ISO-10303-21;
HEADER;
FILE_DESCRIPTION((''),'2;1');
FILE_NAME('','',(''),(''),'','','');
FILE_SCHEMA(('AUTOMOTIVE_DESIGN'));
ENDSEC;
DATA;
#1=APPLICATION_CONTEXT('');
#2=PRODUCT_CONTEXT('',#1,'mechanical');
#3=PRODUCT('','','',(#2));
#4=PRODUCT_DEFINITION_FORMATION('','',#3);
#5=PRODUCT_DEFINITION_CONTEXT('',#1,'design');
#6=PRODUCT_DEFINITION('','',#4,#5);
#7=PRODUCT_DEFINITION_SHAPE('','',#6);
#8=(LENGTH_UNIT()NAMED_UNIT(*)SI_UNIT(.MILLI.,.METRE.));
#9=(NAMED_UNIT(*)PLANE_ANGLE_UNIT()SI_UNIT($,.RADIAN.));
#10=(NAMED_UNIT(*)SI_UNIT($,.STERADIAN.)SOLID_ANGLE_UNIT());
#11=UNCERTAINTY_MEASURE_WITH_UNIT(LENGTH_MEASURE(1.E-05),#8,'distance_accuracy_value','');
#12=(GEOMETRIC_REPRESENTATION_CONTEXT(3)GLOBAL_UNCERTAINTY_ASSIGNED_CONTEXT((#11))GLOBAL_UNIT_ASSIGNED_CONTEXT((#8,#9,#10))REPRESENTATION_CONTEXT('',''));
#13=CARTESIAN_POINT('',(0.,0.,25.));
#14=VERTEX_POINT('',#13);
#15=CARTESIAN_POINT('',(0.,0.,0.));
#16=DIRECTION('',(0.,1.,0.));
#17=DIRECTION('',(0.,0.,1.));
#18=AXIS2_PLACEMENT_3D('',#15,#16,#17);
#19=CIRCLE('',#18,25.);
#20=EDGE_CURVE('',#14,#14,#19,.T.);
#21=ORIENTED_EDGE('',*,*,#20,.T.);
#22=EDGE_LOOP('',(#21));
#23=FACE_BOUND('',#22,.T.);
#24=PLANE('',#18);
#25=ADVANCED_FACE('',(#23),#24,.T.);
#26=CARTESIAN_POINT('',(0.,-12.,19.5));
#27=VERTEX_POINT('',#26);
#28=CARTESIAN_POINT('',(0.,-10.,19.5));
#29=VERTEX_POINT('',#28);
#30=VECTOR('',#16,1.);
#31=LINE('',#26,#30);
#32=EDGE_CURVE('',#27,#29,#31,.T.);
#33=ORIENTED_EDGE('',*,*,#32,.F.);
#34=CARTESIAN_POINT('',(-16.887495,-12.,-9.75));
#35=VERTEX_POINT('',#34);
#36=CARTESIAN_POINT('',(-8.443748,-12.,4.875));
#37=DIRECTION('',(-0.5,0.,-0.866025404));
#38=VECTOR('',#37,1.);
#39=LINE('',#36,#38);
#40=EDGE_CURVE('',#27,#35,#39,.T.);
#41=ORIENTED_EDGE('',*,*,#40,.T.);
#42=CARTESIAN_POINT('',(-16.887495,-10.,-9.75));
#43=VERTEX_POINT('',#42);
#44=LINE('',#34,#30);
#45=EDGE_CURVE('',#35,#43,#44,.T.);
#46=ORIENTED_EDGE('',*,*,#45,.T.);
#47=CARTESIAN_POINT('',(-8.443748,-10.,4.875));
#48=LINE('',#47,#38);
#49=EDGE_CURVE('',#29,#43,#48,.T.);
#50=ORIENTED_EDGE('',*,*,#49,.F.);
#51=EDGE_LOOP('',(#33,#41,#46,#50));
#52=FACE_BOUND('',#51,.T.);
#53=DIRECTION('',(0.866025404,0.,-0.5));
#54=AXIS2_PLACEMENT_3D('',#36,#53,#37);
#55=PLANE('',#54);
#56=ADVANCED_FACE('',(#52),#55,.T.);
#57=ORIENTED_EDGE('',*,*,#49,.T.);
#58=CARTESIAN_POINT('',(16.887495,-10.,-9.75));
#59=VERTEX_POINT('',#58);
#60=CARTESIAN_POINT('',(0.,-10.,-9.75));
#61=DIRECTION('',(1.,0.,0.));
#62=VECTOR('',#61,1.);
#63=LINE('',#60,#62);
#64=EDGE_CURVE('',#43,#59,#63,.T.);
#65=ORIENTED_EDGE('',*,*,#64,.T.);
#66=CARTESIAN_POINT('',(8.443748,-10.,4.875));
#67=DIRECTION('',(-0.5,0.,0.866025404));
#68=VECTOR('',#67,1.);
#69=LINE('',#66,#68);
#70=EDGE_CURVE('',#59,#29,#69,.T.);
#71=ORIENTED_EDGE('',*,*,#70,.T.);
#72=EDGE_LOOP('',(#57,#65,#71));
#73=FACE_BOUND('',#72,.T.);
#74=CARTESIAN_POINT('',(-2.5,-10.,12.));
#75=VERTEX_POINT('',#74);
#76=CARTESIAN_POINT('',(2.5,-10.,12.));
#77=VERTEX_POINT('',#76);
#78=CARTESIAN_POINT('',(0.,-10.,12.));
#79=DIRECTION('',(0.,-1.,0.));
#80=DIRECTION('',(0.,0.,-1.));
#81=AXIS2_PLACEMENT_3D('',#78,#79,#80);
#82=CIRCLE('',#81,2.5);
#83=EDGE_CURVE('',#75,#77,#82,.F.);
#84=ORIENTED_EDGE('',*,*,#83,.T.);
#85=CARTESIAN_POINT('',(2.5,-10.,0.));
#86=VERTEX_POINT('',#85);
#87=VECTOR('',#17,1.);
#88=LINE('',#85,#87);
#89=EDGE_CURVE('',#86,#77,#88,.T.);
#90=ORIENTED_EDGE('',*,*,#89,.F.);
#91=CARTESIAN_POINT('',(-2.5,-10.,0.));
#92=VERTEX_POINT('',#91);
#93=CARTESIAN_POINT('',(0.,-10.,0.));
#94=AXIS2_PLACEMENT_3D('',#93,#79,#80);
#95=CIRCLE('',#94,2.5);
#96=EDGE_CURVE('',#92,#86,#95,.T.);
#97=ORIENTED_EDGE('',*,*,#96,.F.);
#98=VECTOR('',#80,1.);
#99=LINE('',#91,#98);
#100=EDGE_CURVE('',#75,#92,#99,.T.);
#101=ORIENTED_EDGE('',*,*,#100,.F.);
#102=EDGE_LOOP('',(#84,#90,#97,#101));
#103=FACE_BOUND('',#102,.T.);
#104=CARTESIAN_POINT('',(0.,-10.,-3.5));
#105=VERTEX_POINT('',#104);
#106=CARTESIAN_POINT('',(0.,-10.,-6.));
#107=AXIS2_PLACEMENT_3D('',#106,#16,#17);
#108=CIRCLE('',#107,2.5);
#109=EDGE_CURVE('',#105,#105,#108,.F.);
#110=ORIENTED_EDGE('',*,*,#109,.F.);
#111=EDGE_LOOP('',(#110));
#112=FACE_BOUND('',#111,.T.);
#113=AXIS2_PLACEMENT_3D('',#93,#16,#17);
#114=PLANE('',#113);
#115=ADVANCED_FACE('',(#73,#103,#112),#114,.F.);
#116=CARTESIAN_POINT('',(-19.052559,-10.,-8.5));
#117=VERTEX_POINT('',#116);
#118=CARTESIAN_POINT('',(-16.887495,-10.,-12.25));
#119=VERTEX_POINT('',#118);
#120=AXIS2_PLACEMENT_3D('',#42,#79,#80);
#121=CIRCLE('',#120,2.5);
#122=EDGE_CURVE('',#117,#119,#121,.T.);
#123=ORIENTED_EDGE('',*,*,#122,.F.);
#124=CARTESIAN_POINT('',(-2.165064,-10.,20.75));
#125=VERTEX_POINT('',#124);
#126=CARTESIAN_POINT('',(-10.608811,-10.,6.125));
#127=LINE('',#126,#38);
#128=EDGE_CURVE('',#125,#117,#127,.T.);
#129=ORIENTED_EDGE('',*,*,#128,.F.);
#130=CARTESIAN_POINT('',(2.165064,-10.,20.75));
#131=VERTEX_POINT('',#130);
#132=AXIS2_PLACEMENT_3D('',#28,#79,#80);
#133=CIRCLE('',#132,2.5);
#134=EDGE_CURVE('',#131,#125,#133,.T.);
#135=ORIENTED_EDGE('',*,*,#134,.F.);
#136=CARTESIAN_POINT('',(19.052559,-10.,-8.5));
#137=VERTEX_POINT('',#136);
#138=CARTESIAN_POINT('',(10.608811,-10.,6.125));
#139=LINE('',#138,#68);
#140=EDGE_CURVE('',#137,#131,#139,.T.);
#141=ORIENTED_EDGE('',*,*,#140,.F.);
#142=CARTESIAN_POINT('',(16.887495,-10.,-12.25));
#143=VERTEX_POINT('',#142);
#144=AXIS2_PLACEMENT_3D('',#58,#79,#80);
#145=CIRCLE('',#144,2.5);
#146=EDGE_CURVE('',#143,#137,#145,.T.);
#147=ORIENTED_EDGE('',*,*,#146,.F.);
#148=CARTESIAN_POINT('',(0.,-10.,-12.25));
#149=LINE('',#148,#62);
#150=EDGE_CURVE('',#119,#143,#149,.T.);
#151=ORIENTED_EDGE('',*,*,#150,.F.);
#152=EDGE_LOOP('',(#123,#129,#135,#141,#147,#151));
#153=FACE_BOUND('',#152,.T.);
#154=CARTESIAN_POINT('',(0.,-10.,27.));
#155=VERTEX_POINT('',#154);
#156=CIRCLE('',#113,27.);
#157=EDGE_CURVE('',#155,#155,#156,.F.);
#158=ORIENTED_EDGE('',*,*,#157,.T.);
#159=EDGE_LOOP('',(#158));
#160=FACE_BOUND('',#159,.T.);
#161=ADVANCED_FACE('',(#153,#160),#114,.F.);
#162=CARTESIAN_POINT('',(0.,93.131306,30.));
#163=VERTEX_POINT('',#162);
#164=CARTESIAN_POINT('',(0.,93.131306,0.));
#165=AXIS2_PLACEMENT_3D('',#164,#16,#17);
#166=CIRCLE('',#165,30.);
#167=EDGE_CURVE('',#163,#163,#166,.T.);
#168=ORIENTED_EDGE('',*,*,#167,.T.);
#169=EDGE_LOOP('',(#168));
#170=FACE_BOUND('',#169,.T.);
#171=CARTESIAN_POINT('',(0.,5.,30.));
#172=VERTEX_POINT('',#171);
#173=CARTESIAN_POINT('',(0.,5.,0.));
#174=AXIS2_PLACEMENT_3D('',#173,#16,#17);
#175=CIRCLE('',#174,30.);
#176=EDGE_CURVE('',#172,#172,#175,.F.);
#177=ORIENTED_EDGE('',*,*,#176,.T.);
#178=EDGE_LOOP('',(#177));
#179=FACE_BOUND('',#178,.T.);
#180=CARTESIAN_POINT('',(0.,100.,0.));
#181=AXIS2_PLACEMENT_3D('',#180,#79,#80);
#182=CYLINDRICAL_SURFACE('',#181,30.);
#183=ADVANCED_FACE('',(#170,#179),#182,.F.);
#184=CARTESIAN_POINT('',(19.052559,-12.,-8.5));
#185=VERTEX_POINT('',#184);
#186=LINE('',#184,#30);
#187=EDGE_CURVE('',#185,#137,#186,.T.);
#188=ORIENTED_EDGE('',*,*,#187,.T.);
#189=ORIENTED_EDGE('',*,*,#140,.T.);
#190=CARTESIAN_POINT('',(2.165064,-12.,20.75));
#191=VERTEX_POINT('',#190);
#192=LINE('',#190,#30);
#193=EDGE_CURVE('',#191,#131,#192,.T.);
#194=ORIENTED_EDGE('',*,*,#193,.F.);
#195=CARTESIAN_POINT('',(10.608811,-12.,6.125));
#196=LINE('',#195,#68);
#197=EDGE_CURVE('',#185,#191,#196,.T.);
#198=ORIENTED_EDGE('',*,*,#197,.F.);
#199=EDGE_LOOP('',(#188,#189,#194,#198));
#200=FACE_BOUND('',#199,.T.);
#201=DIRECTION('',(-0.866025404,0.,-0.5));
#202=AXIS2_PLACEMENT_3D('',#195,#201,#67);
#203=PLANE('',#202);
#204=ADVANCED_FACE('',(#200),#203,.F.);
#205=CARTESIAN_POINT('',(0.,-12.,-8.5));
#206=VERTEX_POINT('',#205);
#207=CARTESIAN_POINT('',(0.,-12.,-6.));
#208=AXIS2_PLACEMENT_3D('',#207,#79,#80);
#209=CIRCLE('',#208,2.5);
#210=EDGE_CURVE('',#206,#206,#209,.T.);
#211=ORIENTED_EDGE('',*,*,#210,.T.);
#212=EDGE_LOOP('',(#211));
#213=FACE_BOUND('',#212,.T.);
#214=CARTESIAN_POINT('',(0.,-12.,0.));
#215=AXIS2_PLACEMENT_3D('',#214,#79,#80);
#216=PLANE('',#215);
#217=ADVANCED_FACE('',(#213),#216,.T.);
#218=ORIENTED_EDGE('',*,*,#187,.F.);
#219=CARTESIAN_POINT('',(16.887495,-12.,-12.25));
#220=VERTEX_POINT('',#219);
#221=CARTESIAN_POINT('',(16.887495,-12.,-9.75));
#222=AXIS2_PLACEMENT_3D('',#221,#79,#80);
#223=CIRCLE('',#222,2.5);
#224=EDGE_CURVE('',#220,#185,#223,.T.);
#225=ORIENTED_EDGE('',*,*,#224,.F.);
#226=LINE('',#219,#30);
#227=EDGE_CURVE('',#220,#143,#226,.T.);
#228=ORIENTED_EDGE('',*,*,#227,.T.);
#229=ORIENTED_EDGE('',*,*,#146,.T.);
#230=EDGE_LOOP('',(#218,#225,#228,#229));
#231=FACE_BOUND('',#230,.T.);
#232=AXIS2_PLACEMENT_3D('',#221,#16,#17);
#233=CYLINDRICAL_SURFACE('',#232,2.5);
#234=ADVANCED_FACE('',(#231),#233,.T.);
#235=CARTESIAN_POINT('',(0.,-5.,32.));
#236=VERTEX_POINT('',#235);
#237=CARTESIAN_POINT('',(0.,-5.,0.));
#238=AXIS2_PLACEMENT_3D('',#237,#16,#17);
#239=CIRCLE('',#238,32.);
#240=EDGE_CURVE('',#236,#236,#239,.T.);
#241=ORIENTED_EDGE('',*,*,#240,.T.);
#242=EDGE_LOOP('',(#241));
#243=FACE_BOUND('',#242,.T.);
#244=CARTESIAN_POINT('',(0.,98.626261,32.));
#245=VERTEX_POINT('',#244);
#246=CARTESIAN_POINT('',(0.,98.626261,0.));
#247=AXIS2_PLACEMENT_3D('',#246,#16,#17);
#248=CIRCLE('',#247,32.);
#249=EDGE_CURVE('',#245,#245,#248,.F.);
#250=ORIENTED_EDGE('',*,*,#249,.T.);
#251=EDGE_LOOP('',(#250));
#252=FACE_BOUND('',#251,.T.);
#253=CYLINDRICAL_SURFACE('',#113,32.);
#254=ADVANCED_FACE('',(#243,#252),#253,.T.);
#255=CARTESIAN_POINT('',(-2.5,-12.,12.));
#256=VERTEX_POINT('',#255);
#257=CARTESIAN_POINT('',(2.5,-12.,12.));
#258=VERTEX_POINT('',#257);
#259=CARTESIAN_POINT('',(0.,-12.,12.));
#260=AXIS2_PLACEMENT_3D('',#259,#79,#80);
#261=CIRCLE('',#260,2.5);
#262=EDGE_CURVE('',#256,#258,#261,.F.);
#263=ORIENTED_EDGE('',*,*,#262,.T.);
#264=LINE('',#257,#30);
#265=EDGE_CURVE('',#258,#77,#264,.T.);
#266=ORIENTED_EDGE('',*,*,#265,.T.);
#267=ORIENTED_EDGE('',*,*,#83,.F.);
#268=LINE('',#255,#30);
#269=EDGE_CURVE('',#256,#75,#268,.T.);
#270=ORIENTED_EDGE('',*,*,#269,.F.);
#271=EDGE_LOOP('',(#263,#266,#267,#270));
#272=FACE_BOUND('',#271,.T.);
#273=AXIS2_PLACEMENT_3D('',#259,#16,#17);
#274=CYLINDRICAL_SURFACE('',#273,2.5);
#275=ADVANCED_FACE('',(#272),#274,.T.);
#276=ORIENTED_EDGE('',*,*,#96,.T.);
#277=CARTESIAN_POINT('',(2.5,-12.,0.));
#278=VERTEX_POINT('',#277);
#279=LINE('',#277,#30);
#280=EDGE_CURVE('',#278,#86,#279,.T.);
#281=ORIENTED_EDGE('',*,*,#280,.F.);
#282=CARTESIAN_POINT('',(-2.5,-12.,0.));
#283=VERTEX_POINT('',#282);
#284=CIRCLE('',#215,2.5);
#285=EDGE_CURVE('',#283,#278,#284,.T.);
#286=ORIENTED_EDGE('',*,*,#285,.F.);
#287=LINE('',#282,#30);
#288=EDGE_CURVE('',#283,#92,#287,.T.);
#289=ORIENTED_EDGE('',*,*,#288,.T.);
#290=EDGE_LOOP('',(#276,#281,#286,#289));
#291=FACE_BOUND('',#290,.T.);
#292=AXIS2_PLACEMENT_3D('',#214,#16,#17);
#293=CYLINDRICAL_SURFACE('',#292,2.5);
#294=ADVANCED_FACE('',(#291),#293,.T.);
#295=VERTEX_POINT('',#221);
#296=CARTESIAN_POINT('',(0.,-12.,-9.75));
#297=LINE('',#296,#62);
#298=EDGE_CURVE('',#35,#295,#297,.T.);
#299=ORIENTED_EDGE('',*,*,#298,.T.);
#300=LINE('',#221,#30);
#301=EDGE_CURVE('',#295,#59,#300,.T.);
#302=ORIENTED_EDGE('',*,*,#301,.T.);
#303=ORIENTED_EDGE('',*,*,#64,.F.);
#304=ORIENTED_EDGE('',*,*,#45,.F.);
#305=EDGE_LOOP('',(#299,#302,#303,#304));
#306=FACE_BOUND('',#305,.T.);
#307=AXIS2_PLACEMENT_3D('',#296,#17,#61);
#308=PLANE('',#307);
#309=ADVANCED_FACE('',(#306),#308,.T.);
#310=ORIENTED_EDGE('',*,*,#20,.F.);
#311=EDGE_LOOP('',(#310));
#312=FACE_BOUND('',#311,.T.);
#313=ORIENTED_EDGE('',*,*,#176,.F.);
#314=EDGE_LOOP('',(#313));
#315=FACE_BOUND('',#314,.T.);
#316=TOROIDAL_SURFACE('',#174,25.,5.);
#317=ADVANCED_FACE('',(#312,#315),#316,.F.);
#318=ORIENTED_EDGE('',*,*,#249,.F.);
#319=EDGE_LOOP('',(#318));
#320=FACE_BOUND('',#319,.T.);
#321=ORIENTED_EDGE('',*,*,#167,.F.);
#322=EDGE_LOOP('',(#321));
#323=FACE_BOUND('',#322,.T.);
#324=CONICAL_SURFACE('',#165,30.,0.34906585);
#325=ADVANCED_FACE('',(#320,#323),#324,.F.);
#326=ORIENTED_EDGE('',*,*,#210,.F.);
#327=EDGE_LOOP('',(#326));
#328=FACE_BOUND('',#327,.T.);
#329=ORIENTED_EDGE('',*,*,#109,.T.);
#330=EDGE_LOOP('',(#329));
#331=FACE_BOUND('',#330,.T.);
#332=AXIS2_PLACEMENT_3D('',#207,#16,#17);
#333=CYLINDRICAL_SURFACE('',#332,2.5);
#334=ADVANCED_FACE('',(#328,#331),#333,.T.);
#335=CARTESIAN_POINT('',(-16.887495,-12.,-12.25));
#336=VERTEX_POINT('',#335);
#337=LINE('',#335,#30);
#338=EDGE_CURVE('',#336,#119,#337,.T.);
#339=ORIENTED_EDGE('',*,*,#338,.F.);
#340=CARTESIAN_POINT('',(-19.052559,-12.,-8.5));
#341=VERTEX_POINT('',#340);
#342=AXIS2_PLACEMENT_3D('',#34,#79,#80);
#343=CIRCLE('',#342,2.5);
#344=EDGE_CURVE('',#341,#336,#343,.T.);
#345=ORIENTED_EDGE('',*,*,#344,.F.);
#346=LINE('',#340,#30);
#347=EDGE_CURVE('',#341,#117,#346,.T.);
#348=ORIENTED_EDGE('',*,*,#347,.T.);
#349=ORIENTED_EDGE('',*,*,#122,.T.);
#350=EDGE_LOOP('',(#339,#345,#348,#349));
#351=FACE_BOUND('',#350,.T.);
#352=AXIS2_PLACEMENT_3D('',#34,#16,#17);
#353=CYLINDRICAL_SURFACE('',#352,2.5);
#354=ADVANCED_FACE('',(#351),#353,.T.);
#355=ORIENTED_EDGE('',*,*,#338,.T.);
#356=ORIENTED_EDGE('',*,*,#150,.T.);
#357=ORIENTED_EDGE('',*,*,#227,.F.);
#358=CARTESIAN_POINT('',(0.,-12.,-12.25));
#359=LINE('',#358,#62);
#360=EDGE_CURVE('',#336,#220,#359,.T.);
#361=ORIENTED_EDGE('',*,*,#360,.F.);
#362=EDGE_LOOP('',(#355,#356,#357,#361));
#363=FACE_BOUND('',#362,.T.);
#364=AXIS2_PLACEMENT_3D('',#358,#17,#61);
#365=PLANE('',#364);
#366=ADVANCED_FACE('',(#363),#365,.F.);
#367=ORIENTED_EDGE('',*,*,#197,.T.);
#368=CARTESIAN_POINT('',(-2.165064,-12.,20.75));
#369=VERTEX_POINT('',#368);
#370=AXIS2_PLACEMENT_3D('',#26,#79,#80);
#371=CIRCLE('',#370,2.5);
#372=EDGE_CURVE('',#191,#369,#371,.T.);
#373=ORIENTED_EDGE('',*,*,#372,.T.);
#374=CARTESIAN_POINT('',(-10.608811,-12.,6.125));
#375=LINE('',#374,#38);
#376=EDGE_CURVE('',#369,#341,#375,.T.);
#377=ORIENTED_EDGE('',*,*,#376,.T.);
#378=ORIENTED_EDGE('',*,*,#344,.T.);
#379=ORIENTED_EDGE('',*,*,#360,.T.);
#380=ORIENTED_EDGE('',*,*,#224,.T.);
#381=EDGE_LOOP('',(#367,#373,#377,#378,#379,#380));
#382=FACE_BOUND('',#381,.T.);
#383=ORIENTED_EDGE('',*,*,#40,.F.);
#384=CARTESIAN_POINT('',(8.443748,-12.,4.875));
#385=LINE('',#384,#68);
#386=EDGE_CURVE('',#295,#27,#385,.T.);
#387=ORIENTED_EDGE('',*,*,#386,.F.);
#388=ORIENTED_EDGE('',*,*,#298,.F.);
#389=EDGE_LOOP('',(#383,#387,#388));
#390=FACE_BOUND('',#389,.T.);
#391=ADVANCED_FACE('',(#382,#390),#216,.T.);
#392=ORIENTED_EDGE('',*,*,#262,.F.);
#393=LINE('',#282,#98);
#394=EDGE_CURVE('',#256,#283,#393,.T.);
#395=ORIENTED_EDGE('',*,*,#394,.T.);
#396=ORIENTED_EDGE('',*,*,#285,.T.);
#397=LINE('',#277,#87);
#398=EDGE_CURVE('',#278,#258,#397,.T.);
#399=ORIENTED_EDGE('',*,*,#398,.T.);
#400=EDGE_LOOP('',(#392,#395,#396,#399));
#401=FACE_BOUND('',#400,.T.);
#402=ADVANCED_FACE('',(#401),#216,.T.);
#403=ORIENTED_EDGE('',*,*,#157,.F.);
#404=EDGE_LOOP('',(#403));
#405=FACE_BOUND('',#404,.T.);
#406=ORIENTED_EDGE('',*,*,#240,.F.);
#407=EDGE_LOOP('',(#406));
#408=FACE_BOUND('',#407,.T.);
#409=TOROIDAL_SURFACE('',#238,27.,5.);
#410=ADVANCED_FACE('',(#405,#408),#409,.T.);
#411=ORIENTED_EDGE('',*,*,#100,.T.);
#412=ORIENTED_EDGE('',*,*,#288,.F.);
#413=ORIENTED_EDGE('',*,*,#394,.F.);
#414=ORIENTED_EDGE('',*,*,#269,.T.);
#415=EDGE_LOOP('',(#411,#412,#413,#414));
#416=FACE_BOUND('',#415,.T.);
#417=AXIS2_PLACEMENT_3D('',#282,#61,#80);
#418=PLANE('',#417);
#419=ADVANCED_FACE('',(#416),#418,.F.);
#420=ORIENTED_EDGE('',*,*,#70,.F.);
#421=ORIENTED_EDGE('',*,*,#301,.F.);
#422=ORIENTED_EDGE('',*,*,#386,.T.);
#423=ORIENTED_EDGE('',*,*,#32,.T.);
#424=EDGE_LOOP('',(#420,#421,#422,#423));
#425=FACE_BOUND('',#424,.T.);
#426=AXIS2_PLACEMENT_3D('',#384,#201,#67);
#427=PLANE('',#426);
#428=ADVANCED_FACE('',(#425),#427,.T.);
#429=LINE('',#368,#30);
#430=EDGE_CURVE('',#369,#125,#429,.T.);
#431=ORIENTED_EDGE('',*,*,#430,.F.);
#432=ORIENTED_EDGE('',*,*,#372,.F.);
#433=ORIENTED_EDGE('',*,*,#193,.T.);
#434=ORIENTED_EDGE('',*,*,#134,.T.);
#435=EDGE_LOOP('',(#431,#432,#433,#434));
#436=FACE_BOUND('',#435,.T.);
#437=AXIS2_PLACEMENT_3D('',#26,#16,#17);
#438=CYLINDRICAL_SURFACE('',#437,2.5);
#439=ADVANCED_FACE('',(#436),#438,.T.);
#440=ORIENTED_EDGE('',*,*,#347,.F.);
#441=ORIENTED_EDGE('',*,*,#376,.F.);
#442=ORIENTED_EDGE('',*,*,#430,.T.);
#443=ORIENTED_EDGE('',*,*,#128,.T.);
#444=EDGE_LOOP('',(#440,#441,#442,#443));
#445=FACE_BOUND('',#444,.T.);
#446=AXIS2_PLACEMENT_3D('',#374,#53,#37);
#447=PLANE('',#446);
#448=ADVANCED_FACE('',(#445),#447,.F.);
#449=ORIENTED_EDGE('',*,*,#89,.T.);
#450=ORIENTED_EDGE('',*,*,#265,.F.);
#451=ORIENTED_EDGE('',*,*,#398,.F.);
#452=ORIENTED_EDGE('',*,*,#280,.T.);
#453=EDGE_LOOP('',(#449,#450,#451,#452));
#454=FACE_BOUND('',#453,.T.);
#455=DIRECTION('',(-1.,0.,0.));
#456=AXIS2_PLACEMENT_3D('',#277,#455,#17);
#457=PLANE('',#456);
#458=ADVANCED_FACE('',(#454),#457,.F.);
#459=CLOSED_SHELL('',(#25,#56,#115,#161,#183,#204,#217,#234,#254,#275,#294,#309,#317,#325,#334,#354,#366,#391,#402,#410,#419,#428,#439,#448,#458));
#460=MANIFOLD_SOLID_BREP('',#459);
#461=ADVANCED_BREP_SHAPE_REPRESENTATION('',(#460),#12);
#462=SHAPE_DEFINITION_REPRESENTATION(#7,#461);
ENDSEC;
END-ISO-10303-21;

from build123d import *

# Parameters (mm, degrees)
SKETCH1_R           = 32
SKETCH1_R_2         = 30
BOSS_EXTRUDE1_DEPTH = 10
BOSS_EXTRUDE2_START = 100
SKETCH1_3_R         = 32
SKETCH1_3_R_2       = 30
BOSS_EXTRUDE2_DEPTH = 100
FILLET1_R           = 5
FILLET2_R           = 5
SKETCH2_R           = 2.5
BOSS_EXTRUDE3_DEPTH = 2
CHAMFER1_SIZE       = 2.5
CHAMFER1_SIZE_2     = 6.868693549


with BuildPart() as part:
    # Sketch1 → Boss-Extrude1 (new body)
    # profile 1 of 2: a face of its own
    with BuildSketch(Plane(origin=(0, 0, 0), x_dir=(1, 0, 0), z_dir=(0, 1, 0))):
        with Locations(Location((0, 0, 0), (0, 0, 270))):
            Circle(SKETCH1_R)
        Circle(SKETCH1_R_2, mode=Mode.SUBTRACT)
    # profile 2 of 2: a face of its own
    with BuildSketch(Plane(origin=(0, 0, 0), x_dir=(1, 0, 0), z_dir=(0, 1, 0))):
        Circle(SKETCH1_R_2)
    extrude(amount=-BOSS_EXTRUDE1_DEPTH)

    # Sketch1<3> → Boss-Extrude2 (add)
    with BuildSketch(Plane(origin=(0, 0, 0), x_dir=(1, 0, 0), z_dir=(0, 1, 0)).offset(BOSS_EXTRUDE2_START)):
        with Locations(Location((0, 0, 0), (0, 0, 270))):
            Circle(SKETCH1_3_R)
        with Locations(Location((0, 0, 0), (0, 0, 270))):
            Circle(SKETCH1_3_R_2, mode=Mode.SUBTRACT)
    extrude(amount=-BOSS_EXTRUDE2_DEPTH)

    # Fillet1
    fillet1_edges = [part.edges().sort_by_distance(p)[0] for p in [
        (0, 0, -30),
    ]]
    fillet(fillet1_edges, radius=FILLET1_R)

    # Fillet2
    fillet2_edges = [part.edges().sort_by_distance(p)[0] for p in [
        (0, -10, -32),
    ]]
    fillet(fillet2_edges, radius=FILLET2_R)

    # Sketch2 → Boss-Extrude3 (add)
    # profile 1 of 3: a face of its own
    with BuildSketch(Plane.XZ.offset(10)):
        with BuildLine():
            Line((-16.887495374, -12.25), (16.887495374, -12.25))
            ThreePointArc((16.887495374, -12.25), (19.052558883, -11), (19.052558883, -8.5))
            Line((19.052558883, -8.5), (2.165063509, 20.75))
            ThreePointArc((2.165063509, 20.75), (0, 22), (-2.165063509, 20.75))
            Line((-2.165063509, 20.75), (-19.052558883, -8.5))
            ThreePointArc((-19.052558883, -8.5), (-19.052558883, -11), (-16.887495374, -12.25))
        make_face()
        Polygon((-16.887495374, -9.75), (16.887495374, -9.75), (0, 19.5), align=None, mode=Mode.SUBTRACT)
    # profile 2 of 3: a face of its own
    with BuildSketch(Plane.XZ.offset(10)):
        with BuildLine():
            Line((-2.5, 12), (-2.5, 0))
            ThreePointArc((-2.5, 0), (0, -2.5), (2.5, 0))
            Line((2.5, 0), (2.5, 12))
            ThreePointArc((2.5, 12), (0, 14.5), (-2.5, 12))
        make_face()
    # profile 3 of 3: a face of its own
    with BuildSketch(Plane.XZ.offset(10)):
        with Locations(Location((0, -6, 0), (0, 0, 90))):
            Circle(SKETCH2_R)
    extrude(amount=BOSS_EXTRUDE3_DEPTH)

    # Chamfer1
    # the kernel refuses this chamfer: 6.868693549, 2.5 mm, written as the material it takes off along each edge
    with BuildSketch(Plane(origin=(0, 100, 0), x_dir=(0, 0, 1), z_dir=(-1, 0, 0))) as chamfer1_piece_1:
        Polygon((30 + CHAMFER1_SIZE, 0), (30, -CHAMFER1_SIZE_2), (30, 0), align=None)
    revolve(axis=Axis((0, 100, 0), (0, 1, 0)), mode=Mode.SUBTRACT)


solid = part.part
